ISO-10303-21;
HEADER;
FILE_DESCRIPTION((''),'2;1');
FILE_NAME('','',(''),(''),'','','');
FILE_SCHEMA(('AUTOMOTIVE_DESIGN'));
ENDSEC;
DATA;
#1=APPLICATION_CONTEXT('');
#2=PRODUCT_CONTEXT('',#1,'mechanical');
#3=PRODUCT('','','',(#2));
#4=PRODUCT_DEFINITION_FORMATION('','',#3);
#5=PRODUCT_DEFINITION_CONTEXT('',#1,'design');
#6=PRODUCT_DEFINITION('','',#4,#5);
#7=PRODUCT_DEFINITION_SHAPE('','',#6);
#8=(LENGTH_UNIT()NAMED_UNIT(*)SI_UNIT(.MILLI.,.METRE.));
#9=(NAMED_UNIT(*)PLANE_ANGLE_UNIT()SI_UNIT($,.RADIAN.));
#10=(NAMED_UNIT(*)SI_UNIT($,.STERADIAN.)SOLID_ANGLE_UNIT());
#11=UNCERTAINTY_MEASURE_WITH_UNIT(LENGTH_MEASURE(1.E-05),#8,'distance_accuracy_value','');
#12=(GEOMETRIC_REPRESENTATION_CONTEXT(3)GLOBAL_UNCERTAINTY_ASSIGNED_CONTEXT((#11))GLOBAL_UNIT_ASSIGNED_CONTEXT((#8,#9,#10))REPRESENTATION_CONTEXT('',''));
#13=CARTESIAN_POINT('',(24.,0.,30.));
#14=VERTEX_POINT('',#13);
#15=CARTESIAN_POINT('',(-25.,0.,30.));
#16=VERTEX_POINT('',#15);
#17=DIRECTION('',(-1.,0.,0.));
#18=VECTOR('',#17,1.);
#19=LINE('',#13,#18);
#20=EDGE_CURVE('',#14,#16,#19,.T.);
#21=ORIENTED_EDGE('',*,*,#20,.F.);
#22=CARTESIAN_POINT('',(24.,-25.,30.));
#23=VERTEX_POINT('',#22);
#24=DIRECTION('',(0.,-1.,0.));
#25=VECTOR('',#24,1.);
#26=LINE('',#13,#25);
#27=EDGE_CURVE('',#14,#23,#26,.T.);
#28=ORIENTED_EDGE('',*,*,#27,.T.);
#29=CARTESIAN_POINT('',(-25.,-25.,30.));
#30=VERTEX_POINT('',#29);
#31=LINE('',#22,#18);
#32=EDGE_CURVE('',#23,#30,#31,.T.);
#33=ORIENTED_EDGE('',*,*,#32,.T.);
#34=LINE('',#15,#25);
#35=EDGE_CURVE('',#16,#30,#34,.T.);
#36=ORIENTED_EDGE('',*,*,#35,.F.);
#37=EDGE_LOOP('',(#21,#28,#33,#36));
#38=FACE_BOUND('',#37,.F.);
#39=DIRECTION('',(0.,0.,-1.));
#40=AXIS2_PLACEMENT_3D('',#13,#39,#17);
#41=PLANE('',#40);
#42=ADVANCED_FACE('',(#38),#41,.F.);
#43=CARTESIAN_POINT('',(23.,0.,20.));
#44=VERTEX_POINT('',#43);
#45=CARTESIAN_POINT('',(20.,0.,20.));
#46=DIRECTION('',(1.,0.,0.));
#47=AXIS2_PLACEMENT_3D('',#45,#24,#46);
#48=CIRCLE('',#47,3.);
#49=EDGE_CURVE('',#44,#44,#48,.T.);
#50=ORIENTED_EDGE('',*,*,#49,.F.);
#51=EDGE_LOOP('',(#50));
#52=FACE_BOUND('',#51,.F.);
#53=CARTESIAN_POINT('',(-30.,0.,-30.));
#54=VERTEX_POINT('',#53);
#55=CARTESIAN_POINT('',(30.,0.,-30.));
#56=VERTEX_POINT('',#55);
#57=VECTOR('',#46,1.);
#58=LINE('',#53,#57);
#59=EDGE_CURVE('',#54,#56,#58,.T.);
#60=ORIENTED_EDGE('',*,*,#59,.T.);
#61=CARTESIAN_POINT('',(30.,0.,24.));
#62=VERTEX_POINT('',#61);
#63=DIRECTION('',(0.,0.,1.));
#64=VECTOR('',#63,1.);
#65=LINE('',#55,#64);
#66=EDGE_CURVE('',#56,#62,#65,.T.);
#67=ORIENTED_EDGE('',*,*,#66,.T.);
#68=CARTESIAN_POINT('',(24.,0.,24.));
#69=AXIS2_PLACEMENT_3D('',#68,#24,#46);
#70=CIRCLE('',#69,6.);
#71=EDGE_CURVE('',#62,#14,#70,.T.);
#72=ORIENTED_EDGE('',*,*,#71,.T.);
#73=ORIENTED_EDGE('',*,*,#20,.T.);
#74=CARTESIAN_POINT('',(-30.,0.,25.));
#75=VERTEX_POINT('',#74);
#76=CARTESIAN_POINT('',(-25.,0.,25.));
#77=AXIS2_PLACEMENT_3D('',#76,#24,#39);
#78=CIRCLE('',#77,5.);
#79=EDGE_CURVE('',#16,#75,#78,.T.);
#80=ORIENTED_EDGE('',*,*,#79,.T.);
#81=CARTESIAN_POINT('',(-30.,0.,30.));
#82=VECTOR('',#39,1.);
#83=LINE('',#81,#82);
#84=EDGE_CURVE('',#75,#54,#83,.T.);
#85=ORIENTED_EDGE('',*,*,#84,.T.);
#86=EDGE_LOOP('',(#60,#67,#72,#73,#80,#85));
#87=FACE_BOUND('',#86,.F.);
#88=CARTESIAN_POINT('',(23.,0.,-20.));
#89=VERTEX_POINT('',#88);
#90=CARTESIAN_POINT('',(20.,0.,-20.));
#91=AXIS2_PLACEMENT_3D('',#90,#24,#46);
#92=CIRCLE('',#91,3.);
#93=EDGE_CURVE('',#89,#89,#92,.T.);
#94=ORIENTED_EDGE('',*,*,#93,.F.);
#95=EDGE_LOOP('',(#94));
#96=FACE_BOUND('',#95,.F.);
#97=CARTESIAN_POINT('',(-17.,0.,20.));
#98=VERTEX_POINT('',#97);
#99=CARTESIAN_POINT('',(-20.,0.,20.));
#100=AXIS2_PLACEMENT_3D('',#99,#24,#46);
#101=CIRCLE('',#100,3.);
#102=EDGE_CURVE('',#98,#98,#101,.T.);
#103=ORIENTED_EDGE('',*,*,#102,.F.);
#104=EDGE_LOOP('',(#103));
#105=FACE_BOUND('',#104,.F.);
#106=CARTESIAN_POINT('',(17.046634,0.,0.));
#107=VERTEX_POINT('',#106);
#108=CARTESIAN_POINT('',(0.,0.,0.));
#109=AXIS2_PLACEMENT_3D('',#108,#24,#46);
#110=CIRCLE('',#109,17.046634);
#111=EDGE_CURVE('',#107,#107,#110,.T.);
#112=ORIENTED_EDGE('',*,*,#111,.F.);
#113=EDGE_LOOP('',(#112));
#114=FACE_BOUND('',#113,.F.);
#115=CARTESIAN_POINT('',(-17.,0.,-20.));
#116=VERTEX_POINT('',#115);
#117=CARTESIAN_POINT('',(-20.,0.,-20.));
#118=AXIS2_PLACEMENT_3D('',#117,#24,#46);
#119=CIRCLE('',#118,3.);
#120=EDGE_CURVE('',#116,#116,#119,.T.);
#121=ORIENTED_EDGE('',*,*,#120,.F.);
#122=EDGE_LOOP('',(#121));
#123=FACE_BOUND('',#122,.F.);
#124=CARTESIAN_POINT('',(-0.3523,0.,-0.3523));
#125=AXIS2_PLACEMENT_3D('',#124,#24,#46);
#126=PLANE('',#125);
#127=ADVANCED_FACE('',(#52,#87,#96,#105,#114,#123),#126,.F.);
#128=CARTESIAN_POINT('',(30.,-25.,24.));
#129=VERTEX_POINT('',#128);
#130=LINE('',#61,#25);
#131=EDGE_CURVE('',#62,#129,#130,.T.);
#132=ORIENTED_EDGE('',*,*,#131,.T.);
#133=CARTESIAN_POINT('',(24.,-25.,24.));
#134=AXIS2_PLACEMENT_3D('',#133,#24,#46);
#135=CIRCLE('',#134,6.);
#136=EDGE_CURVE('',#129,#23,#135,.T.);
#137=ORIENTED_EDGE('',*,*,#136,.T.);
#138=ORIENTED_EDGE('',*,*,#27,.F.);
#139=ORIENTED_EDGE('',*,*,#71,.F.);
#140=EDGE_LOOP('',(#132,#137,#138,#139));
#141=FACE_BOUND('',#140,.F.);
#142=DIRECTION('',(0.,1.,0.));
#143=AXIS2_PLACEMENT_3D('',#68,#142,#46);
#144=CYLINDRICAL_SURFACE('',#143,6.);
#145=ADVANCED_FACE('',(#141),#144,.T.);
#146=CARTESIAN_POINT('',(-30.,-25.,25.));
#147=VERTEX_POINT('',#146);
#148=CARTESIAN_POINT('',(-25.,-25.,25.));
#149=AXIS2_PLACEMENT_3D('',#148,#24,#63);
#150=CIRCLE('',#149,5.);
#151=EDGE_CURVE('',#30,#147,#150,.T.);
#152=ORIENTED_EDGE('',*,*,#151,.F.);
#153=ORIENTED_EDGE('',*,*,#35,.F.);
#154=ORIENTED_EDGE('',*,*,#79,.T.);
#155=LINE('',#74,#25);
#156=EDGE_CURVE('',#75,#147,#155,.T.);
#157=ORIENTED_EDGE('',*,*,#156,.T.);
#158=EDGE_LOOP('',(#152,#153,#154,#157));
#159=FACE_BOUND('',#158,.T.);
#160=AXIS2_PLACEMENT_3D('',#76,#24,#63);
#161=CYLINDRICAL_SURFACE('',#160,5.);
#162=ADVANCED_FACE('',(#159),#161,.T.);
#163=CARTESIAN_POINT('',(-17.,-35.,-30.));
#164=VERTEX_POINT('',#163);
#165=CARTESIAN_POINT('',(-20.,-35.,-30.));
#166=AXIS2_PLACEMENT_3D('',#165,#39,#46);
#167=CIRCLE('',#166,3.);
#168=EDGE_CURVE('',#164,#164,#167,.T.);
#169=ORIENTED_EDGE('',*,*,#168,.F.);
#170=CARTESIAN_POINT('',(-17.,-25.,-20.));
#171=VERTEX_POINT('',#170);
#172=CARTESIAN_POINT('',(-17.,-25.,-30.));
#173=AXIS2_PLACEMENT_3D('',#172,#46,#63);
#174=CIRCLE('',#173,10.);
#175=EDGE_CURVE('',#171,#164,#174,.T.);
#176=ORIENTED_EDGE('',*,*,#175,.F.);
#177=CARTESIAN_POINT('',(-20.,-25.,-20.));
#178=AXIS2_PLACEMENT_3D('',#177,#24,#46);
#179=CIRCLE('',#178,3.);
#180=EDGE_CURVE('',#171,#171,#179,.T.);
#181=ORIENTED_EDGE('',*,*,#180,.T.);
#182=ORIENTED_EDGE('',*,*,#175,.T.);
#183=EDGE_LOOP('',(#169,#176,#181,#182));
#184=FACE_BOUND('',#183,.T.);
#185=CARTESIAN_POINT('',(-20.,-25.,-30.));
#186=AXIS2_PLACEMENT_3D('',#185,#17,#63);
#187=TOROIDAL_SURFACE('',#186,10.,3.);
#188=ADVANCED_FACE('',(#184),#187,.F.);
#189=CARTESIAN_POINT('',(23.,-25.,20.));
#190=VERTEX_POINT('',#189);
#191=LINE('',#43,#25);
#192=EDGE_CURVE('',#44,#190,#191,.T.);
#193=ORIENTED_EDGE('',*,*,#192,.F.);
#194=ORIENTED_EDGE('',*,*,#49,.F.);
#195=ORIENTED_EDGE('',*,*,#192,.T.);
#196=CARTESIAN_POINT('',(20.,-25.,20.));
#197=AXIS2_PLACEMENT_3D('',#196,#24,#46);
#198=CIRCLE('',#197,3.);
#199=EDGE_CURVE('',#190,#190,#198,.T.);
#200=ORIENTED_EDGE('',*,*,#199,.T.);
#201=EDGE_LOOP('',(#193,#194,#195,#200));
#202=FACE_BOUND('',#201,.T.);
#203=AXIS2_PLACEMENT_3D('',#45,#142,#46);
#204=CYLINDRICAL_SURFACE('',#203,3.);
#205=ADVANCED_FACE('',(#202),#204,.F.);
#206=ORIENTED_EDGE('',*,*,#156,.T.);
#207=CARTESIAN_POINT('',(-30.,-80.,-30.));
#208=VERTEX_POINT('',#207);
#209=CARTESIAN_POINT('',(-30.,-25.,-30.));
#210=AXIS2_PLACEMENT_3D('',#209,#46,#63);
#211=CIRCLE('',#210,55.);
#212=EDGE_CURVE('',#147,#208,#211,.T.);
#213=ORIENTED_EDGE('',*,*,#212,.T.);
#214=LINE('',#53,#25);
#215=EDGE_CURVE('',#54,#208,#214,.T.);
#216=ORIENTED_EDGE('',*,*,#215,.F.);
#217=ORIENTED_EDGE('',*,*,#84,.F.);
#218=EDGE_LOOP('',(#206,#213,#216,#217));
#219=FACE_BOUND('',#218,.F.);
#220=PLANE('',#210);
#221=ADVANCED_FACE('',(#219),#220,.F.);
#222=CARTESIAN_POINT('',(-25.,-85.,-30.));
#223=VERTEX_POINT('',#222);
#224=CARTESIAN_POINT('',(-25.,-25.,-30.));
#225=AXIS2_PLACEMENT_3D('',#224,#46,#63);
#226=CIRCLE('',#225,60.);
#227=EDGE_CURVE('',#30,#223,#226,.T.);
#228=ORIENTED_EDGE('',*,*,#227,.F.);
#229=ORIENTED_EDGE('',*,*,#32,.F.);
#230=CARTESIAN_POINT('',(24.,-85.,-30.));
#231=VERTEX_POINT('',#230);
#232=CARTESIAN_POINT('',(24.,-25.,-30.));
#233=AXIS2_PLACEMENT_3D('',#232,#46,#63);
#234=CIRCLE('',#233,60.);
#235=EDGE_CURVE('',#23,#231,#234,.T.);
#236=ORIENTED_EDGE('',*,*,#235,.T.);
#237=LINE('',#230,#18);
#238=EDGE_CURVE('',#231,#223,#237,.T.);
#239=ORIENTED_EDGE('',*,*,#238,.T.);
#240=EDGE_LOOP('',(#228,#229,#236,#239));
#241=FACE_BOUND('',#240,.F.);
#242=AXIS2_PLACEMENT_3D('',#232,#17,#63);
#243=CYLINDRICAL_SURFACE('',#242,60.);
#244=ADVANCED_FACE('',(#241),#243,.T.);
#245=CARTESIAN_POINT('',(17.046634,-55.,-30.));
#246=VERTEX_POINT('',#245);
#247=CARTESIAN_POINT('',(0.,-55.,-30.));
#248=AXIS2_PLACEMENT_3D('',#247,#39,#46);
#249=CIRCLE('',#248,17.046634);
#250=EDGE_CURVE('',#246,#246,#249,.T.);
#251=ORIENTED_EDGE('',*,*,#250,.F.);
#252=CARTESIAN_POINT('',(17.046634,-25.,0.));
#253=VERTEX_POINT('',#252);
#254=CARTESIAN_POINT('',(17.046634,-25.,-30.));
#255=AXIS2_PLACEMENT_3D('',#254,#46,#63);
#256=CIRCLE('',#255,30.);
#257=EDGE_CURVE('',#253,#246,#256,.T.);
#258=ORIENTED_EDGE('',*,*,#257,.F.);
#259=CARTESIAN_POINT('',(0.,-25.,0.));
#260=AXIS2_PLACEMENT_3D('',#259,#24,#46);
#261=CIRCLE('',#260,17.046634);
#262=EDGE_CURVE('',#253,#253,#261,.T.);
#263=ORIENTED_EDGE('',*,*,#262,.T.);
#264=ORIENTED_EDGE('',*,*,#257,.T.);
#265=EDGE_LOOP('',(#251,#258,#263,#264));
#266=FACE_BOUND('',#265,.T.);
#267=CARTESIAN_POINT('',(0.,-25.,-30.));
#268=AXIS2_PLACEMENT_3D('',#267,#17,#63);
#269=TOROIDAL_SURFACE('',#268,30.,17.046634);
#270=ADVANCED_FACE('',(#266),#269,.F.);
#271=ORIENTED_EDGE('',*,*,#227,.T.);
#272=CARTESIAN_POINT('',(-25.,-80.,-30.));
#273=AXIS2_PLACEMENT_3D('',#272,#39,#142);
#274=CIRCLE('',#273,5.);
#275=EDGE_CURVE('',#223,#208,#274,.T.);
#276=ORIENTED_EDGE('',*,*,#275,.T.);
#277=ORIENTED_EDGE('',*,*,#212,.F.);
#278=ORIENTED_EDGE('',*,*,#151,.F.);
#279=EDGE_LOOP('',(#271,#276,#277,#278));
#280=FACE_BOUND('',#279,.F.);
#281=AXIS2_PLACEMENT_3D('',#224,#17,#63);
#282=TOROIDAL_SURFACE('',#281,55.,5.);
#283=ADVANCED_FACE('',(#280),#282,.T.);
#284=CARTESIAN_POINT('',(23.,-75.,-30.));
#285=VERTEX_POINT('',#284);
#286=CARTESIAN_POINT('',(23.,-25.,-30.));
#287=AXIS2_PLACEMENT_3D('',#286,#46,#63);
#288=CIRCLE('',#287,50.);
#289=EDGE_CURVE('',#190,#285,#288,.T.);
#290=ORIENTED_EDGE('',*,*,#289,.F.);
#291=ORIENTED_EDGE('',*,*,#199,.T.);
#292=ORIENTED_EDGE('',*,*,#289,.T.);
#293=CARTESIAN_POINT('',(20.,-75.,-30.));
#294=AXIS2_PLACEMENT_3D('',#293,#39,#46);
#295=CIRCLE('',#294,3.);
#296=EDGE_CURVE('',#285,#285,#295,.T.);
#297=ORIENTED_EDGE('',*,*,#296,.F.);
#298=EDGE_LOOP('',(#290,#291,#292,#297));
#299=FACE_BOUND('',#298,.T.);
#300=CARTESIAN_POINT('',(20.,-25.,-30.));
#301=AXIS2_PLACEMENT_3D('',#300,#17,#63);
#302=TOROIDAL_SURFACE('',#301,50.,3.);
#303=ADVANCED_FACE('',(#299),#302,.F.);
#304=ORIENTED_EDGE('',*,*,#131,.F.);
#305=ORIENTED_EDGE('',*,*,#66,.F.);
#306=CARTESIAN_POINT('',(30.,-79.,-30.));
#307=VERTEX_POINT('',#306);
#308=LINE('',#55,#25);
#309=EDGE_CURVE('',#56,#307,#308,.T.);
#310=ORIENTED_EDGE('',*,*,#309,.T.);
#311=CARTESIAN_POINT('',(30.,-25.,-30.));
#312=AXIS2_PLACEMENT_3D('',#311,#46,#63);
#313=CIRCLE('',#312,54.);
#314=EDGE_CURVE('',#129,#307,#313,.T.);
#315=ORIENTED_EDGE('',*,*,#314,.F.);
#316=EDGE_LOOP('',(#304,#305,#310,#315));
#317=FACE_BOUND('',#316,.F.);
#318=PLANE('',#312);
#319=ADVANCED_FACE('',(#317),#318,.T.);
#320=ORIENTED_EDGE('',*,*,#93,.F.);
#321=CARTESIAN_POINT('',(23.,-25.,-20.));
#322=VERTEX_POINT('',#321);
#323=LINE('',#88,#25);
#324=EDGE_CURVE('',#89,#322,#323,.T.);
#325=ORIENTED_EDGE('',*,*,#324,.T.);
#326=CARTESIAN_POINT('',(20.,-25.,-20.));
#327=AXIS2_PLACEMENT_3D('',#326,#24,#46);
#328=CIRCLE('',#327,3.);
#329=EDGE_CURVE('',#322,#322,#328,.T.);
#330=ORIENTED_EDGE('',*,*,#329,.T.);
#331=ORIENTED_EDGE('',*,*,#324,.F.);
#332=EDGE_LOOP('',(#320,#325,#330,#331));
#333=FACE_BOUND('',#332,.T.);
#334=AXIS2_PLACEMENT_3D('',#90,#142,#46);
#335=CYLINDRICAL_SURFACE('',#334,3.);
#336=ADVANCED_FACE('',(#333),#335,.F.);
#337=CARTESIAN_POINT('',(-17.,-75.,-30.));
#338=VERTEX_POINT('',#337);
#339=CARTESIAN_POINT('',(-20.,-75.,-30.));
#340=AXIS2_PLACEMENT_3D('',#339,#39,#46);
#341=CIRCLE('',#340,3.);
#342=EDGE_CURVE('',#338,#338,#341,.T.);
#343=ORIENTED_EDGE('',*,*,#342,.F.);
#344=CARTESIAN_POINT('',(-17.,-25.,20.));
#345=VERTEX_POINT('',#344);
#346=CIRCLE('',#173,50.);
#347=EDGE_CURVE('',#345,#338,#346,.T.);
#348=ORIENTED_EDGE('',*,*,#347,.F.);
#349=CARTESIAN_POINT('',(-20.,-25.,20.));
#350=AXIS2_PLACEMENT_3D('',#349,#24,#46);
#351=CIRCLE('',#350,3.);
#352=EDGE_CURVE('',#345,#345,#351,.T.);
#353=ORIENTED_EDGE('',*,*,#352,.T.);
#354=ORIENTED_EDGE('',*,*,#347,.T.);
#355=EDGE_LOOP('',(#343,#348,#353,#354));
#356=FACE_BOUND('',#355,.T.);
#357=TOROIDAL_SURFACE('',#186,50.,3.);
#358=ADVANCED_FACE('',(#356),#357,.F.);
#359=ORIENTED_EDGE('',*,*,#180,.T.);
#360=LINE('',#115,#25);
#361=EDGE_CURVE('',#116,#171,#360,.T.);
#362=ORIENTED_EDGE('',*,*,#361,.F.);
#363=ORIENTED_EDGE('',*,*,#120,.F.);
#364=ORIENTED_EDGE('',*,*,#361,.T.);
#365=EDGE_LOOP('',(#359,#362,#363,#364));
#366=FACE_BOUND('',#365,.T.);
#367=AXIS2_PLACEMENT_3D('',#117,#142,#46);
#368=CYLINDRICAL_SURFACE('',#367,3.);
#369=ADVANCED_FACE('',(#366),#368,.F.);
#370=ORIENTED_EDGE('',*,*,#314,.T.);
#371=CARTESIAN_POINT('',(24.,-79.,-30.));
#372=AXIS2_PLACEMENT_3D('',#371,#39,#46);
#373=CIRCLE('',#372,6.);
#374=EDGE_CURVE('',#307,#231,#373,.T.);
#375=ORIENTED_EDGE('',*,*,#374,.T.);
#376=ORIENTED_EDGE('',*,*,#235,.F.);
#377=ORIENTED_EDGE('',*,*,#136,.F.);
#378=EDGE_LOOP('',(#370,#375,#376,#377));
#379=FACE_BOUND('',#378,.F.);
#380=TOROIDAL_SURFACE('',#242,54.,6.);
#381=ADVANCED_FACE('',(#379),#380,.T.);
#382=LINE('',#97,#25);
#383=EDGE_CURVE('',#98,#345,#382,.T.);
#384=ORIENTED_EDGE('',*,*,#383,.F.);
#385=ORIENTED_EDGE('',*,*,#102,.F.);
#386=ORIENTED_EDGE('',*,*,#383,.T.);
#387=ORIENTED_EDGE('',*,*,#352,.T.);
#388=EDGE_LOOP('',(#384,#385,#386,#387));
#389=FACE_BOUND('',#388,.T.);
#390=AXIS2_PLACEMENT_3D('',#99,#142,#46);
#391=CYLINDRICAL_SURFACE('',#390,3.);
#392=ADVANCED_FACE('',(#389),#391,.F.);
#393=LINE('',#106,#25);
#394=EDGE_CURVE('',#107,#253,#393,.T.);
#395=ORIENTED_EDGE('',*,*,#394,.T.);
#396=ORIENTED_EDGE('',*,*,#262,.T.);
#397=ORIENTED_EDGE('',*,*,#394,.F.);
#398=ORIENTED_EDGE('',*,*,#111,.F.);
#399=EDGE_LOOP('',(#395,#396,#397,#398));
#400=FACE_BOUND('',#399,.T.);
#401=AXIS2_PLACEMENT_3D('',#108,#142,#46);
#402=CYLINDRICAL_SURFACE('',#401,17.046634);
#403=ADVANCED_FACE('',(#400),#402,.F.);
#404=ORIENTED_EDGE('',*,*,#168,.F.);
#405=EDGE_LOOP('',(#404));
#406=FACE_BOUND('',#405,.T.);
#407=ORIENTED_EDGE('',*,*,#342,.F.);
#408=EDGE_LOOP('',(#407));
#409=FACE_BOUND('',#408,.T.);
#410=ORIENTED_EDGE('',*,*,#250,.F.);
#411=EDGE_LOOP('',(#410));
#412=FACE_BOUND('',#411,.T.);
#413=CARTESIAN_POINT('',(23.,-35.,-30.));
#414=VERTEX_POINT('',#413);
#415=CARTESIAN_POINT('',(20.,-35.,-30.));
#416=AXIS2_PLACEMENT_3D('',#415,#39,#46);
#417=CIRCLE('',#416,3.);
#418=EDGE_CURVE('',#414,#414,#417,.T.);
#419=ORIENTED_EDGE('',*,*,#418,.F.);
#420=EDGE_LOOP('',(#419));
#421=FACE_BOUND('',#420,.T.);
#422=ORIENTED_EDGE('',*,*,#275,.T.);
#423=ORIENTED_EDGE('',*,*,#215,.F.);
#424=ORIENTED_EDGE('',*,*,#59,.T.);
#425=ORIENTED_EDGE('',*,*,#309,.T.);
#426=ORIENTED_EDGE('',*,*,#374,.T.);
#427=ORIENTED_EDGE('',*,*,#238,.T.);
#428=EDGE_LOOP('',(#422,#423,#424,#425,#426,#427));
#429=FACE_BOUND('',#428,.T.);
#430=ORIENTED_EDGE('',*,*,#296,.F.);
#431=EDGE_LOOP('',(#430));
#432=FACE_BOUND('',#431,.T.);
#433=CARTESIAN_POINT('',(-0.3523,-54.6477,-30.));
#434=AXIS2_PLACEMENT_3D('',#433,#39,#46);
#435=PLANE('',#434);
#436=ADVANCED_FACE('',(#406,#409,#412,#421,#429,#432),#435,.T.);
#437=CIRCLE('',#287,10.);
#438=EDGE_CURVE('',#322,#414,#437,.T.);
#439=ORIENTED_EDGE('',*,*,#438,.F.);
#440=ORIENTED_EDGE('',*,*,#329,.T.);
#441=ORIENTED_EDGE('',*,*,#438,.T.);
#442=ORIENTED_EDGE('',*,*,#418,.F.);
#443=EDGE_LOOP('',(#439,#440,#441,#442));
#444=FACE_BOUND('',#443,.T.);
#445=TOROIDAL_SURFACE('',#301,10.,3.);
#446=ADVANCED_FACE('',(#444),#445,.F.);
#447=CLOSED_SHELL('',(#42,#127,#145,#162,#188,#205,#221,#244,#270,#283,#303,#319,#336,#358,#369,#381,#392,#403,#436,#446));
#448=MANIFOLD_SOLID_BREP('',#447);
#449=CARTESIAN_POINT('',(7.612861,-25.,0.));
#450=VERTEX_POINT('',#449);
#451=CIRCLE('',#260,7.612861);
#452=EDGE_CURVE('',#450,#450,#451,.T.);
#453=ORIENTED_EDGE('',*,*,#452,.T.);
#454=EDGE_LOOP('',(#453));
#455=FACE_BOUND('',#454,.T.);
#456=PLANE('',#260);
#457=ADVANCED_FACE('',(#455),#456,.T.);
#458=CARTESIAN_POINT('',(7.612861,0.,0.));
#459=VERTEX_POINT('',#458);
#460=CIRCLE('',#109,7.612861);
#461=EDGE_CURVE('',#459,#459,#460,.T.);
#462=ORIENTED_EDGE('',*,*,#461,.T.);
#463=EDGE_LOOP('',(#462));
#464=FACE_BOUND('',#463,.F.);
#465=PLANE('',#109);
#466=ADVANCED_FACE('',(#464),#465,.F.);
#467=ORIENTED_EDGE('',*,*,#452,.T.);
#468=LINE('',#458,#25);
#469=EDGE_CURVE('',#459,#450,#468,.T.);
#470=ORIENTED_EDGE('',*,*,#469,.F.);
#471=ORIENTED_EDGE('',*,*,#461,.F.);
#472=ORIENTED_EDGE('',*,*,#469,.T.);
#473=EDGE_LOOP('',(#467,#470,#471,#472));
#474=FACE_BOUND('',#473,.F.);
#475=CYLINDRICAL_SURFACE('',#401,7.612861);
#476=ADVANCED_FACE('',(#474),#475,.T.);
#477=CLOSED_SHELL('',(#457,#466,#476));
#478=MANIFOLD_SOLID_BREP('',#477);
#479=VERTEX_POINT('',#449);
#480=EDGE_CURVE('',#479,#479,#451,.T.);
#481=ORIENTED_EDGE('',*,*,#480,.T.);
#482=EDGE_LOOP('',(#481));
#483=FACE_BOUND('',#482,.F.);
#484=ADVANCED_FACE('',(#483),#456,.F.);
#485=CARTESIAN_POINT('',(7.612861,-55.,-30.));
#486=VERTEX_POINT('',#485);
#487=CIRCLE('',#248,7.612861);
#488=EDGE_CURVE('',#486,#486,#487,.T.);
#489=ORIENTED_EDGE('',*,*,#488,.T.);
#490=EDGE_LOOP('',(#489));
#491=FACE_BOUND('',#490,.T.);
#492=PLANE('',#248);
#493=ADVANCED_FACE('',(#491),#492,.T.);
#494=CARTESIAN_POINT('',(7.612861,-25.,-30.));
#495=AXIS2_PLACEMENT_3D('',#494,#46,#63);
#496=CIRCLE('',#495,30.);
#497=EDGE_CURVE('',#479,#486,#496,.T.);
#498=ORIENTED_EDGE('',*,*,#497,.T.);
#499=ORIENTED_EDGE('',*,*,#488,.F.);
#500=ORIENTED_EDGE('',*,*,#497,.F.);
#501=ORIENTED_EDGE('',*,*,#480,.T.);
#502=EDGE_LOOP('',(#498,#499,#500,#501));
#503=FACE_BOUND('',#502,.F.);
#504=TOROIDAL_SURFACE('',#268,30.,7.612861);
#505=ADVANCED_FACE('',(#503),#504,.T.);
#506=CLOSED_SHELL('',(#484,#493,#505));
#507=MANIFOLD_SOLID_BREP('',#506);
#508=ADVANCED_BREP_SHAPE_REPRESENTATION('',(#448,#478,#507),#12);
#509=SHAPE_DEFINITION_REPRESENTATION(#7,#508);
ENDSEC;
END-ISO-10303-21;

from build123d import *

# Parameters (mm, degrees)
F0_R        = 3
F0_R_2      = 17.0466335339
F1_DEPTH    = 25
F0_R_3      = 7.612861108
F1_FACE_R   = 3
F1_FACE_R_2 = 17.0466335339
F2_ANGLE    = 90
F1_FACE_R_3 = 7.612861108
F3_R        = 5


with BuildPart() as f1:
    # F0 (on Front) → F1 (new body)
    with BuildSketch(Plane.XZ):
        with BuildLine():
            Line((24, 30), (-30, 30))
            Line((-30, 30), (-30, -30))
            Line((-30, -30), (30, -30))
            Line((30, -30), (30, 24))
            ThreePointArc((30, 24), (28.2426406871, 28.2426406871), (24, 30))
        make_face()
        with Locations((-20, -20)):
            Circle(F0_R, mode=Mode.SUBTRACT)
        with Locations((20, -20)):
            Circle(F0_R, mode=Mode.SUBTRACT)
        with Locations((-20, 20)):
            Circle(F0_R, mode=Mode.SUBTRACT)
        Circle(F0_R_2, mode=Mode.SUBTRACT)
        with Locations((20, 20)):
            Circle(F0_R, mode=Mode.SUBTRACT)
    extrude(amount=F1_DEPTH)

    # F1_face (on face) → F2 (revolve)
    with BuildSketch(Plane(origin=(-0.0862793444, -25, -0.0862793444), x_dir=(1, 0, 0), z_dir=(0, -1, 0))):
        with BuildLine():
            Line((24.0862793444, 30.0862793444), (-29.9137206556, 30.0862793444))
            Line((-29.9137206556, 30.0862793444), (-29.9137206556, -29.9137206556))
            Line((-29.9137206556, -29.9137206556), (30.0862793444, -29.9137206556))
            Line((30.0862793444, -29.9137206556), (30.0862793444, 24.0862793444))
            ThreePointArc((30.0862793444, 24.0862793444), (28.3289200315, 28.3289200315), (24.0862793444, 30.0862793444))
        make_face()
        with Locations((-19.9137206556, -19.9137206556)):
            Circle(F1_FACE_R, mode=Mode.SUBTRACT)
        with Locations((20.0862793444, -19.9137206556)):
            Circle(F1_FACE_R, mode=Mode.SUBTRACT)
        with Locations((-19.9137206556, 20.0862793444)):
            Circle(F1_FACE_R, mode=Mode.SUBTRACT)
        with Locations((0.0862793444, 0.0862793444)):
            Circle(F1_FACE_R_2, mode=Mode.SUBTRACT)
        with Locations((20.0862793444, 20.0862793444)):
            Circle(F1_FACE_R, mode=Mode.SUBTRACT)
    revolve(axis=Axis((0, -25, -30), (1, 0, 0)), revolution_arc=F2_ANGLE)

    # F3
    f3_edges = [f1.edges().sort_by_distance(p)[0] for p in [
        (-30, -67.426407, 12.426407),
        (-30, -12.5, 30),
    ]]
    fillet(f3_edges, radius=F3_R)


with BuildPart() as f1b:
    # F0 (on Front) → F1, piece 2 (new body)
    with BuildSketch(Plane.XZ):
        Circle(F0_R_3)
    extrude(amount=F1_DEPTH)


with BuildPart() as f2:
    # F1_face (on face) → F2, piece 2 (revolve)
    with BuildSketch(Plane(origin=(-0.0862793444, -25, -0.0862793444), x_dir=(1, 0, 0), z_dir=(0, -1, 0))):
        with Locations((0.0862793444, 0.0862793444)):
            Circle(F1_FACE_R_3)
    revolve(axis=Axis((0, -25, -30), (1, 0, 0)), revolution_arc=F2_ANGLE)


solid = Compound([f1.part, f1b.part, f2.part])
